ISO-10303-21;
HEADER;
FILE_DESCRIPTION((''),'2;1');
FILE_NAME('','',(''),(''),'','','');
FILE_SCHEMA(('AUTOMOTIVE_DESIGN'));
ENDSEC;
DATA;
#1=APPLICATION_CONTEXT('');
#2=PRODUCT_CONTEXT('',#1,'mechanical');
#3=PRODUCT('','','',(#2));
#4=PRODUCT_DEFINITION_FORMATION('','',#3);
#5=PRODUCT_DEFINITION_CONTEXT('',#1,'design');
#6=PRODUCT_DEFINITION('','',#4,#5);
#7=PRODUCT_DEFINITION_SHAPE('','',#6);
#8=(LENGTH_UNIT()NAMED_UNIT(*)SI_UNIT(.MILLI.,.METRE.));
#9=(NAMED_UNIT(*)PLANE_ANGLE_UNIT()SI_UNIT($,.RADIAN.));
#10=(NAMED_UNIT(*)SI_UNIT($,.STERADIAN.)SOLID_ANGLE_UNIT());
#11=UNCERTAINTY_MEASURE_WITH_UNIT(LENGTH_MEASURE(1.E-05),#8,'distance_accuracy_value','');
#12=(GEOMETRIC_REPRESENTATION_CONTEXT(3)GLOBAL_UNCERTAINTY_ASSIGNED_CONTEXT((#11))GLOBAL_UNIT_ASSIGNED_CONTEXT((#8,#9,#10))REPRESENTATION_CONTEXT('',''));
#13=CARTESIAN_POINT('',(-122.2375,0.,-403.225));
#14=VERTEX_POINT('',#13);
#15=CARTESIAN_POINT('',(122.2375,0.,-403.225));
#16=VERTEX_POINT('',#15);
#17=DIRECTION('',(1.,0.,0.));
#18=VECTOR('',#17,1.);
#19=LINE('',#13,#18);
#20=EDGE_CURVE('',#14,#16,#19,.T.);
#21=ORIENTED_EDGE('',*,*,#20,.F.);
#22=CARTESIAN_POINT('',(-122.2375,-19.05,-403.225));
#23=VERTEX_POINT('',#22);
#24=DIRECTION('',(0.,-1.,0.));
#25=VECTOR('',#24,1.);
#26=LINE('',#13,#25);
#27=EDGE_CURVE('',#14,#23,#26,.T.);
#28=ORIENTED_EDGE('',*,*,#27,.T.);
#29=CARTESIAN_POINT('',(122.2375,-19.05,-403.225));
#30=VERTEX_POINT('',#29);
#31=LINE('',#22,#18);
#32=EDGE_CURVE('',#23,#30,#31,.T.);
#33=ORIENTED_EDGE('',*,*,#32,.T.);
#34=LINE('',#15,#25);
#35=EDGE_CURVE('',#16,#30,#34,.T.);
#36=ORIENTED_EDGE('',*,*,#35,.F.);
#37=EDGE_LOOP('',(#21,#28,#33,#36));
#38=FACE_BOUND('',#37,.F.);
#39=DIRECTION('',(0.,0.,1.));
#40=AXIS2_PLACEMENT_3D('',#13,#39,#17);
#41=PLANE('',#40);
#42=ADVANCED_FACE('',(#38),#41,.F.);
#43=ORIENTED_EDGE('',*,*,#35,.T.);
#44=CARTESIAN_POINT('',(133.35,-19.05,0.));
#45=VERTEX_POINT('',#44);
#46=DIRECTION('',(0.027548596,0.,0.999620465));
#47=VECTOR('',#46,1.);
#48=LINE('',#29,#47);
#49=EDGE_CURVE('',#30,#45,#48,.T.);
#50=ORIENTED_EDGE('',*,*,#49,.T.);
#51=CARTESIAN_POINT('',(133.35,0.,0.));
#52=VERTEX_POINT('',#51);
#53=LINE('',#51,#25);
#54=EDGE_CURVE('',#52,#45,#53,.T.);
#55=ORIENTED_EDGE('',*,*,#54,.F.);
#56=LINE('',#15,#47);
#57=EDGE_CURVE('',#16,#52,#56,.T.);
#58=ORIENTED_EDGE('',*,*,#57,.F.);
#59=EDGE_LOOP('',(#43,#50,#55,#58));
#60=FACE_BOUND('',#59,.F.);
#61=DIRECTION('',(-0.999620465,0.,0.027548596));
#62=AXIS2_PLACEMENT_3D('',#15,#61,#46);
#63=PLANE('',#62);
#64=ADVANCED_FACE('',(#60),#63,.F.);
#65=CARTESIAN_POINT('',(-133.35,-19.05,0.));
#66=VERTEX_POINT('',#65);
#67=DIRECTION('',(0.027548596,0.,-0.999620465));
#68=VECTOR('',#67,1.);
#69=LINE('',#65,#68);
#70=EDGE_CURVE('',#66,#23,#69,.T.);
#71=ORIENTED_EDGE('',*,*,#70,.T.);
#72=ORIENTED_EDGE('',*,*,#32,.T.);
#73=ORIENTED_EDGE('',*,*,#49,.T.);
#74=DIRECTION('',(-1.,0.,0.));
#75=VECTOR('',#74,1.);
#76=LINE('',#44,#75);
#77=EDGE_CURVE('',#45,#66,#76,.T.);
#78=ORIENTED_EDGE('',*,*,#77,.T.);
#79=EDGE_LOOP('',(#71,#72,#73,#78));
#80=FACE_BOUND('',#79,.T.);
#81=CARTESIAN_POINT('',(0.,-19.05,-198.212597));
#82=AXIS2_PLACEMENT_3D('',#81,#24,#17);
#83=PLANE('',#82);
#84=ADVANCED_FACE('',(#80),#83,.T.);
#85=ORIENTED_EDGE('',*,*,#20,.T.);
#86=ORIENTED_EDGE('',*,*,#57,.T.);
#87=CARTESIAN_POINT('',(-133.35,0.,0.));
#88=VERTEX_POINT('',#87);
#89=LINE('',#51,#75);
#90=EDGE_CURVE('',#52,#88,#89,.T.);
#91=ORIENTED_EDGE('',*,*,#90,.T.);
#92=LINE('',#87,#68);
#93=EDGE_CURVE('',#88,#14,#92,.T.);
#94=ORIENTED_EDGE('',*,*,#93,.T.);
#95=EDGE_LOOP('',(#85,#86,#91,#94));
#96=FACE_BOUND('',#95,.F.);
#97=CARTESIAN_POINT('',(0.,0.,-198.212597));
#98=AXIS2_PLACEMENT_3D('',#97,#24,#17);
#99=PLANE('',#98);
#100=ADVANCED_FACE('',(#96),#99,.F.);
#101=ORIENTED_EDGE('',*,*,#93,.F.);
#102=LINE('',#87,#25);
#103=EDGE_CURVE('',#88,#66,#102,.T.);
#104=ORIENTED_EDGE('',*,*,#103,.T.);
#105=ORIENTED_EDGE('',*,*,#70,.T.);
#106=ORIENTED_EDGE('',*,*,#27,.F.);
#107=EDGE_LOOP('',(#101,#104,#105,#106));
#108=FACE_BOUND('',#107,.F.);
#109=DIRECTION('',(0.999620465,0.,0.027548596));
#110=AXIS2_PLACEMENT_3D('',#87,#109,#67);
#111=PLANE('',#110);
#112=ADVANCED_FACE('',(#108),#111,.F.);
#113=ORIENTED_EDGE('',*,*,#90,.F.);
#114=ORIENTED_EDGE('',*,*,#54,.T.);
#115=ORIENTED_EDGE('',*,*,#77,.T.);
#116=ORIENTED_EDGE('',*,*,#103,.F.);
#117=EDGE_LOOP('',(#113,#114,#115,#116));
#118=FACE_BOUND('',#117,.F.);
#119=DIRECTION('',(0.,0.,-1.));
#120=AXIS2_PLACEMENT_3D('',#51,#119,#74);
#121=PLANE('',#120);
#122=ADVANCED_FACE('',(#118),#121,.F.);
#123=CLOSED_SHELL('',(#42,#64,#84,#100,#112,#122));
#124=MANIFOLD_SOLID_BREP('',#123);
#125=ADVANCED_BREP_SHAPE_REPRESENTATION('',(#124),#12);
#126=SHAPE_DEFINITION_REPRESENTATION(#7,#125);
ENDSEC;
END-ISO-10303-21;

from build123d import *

# Parameters (mm, degrees)
F1_DEPTH = 19.05


# Not quite as in the source:
# - a length typed as a fraction of an inch, garbled in the dataset ("3 / 203.2 mm" for 3/8 in), is restored


with BuildPart() as f1:
    # F0 (on Front) → F1 (new body)
    with BuildSketch(Plane.XZ):
        Polygon((133.35, 0), (0, 0), (-133.35, 0), (-122.2375, -403.225), (0, -403.225), (122.2375, -403.225), align=None)
    extrude(amount=F1_DEPTH)


solid = f1.part
